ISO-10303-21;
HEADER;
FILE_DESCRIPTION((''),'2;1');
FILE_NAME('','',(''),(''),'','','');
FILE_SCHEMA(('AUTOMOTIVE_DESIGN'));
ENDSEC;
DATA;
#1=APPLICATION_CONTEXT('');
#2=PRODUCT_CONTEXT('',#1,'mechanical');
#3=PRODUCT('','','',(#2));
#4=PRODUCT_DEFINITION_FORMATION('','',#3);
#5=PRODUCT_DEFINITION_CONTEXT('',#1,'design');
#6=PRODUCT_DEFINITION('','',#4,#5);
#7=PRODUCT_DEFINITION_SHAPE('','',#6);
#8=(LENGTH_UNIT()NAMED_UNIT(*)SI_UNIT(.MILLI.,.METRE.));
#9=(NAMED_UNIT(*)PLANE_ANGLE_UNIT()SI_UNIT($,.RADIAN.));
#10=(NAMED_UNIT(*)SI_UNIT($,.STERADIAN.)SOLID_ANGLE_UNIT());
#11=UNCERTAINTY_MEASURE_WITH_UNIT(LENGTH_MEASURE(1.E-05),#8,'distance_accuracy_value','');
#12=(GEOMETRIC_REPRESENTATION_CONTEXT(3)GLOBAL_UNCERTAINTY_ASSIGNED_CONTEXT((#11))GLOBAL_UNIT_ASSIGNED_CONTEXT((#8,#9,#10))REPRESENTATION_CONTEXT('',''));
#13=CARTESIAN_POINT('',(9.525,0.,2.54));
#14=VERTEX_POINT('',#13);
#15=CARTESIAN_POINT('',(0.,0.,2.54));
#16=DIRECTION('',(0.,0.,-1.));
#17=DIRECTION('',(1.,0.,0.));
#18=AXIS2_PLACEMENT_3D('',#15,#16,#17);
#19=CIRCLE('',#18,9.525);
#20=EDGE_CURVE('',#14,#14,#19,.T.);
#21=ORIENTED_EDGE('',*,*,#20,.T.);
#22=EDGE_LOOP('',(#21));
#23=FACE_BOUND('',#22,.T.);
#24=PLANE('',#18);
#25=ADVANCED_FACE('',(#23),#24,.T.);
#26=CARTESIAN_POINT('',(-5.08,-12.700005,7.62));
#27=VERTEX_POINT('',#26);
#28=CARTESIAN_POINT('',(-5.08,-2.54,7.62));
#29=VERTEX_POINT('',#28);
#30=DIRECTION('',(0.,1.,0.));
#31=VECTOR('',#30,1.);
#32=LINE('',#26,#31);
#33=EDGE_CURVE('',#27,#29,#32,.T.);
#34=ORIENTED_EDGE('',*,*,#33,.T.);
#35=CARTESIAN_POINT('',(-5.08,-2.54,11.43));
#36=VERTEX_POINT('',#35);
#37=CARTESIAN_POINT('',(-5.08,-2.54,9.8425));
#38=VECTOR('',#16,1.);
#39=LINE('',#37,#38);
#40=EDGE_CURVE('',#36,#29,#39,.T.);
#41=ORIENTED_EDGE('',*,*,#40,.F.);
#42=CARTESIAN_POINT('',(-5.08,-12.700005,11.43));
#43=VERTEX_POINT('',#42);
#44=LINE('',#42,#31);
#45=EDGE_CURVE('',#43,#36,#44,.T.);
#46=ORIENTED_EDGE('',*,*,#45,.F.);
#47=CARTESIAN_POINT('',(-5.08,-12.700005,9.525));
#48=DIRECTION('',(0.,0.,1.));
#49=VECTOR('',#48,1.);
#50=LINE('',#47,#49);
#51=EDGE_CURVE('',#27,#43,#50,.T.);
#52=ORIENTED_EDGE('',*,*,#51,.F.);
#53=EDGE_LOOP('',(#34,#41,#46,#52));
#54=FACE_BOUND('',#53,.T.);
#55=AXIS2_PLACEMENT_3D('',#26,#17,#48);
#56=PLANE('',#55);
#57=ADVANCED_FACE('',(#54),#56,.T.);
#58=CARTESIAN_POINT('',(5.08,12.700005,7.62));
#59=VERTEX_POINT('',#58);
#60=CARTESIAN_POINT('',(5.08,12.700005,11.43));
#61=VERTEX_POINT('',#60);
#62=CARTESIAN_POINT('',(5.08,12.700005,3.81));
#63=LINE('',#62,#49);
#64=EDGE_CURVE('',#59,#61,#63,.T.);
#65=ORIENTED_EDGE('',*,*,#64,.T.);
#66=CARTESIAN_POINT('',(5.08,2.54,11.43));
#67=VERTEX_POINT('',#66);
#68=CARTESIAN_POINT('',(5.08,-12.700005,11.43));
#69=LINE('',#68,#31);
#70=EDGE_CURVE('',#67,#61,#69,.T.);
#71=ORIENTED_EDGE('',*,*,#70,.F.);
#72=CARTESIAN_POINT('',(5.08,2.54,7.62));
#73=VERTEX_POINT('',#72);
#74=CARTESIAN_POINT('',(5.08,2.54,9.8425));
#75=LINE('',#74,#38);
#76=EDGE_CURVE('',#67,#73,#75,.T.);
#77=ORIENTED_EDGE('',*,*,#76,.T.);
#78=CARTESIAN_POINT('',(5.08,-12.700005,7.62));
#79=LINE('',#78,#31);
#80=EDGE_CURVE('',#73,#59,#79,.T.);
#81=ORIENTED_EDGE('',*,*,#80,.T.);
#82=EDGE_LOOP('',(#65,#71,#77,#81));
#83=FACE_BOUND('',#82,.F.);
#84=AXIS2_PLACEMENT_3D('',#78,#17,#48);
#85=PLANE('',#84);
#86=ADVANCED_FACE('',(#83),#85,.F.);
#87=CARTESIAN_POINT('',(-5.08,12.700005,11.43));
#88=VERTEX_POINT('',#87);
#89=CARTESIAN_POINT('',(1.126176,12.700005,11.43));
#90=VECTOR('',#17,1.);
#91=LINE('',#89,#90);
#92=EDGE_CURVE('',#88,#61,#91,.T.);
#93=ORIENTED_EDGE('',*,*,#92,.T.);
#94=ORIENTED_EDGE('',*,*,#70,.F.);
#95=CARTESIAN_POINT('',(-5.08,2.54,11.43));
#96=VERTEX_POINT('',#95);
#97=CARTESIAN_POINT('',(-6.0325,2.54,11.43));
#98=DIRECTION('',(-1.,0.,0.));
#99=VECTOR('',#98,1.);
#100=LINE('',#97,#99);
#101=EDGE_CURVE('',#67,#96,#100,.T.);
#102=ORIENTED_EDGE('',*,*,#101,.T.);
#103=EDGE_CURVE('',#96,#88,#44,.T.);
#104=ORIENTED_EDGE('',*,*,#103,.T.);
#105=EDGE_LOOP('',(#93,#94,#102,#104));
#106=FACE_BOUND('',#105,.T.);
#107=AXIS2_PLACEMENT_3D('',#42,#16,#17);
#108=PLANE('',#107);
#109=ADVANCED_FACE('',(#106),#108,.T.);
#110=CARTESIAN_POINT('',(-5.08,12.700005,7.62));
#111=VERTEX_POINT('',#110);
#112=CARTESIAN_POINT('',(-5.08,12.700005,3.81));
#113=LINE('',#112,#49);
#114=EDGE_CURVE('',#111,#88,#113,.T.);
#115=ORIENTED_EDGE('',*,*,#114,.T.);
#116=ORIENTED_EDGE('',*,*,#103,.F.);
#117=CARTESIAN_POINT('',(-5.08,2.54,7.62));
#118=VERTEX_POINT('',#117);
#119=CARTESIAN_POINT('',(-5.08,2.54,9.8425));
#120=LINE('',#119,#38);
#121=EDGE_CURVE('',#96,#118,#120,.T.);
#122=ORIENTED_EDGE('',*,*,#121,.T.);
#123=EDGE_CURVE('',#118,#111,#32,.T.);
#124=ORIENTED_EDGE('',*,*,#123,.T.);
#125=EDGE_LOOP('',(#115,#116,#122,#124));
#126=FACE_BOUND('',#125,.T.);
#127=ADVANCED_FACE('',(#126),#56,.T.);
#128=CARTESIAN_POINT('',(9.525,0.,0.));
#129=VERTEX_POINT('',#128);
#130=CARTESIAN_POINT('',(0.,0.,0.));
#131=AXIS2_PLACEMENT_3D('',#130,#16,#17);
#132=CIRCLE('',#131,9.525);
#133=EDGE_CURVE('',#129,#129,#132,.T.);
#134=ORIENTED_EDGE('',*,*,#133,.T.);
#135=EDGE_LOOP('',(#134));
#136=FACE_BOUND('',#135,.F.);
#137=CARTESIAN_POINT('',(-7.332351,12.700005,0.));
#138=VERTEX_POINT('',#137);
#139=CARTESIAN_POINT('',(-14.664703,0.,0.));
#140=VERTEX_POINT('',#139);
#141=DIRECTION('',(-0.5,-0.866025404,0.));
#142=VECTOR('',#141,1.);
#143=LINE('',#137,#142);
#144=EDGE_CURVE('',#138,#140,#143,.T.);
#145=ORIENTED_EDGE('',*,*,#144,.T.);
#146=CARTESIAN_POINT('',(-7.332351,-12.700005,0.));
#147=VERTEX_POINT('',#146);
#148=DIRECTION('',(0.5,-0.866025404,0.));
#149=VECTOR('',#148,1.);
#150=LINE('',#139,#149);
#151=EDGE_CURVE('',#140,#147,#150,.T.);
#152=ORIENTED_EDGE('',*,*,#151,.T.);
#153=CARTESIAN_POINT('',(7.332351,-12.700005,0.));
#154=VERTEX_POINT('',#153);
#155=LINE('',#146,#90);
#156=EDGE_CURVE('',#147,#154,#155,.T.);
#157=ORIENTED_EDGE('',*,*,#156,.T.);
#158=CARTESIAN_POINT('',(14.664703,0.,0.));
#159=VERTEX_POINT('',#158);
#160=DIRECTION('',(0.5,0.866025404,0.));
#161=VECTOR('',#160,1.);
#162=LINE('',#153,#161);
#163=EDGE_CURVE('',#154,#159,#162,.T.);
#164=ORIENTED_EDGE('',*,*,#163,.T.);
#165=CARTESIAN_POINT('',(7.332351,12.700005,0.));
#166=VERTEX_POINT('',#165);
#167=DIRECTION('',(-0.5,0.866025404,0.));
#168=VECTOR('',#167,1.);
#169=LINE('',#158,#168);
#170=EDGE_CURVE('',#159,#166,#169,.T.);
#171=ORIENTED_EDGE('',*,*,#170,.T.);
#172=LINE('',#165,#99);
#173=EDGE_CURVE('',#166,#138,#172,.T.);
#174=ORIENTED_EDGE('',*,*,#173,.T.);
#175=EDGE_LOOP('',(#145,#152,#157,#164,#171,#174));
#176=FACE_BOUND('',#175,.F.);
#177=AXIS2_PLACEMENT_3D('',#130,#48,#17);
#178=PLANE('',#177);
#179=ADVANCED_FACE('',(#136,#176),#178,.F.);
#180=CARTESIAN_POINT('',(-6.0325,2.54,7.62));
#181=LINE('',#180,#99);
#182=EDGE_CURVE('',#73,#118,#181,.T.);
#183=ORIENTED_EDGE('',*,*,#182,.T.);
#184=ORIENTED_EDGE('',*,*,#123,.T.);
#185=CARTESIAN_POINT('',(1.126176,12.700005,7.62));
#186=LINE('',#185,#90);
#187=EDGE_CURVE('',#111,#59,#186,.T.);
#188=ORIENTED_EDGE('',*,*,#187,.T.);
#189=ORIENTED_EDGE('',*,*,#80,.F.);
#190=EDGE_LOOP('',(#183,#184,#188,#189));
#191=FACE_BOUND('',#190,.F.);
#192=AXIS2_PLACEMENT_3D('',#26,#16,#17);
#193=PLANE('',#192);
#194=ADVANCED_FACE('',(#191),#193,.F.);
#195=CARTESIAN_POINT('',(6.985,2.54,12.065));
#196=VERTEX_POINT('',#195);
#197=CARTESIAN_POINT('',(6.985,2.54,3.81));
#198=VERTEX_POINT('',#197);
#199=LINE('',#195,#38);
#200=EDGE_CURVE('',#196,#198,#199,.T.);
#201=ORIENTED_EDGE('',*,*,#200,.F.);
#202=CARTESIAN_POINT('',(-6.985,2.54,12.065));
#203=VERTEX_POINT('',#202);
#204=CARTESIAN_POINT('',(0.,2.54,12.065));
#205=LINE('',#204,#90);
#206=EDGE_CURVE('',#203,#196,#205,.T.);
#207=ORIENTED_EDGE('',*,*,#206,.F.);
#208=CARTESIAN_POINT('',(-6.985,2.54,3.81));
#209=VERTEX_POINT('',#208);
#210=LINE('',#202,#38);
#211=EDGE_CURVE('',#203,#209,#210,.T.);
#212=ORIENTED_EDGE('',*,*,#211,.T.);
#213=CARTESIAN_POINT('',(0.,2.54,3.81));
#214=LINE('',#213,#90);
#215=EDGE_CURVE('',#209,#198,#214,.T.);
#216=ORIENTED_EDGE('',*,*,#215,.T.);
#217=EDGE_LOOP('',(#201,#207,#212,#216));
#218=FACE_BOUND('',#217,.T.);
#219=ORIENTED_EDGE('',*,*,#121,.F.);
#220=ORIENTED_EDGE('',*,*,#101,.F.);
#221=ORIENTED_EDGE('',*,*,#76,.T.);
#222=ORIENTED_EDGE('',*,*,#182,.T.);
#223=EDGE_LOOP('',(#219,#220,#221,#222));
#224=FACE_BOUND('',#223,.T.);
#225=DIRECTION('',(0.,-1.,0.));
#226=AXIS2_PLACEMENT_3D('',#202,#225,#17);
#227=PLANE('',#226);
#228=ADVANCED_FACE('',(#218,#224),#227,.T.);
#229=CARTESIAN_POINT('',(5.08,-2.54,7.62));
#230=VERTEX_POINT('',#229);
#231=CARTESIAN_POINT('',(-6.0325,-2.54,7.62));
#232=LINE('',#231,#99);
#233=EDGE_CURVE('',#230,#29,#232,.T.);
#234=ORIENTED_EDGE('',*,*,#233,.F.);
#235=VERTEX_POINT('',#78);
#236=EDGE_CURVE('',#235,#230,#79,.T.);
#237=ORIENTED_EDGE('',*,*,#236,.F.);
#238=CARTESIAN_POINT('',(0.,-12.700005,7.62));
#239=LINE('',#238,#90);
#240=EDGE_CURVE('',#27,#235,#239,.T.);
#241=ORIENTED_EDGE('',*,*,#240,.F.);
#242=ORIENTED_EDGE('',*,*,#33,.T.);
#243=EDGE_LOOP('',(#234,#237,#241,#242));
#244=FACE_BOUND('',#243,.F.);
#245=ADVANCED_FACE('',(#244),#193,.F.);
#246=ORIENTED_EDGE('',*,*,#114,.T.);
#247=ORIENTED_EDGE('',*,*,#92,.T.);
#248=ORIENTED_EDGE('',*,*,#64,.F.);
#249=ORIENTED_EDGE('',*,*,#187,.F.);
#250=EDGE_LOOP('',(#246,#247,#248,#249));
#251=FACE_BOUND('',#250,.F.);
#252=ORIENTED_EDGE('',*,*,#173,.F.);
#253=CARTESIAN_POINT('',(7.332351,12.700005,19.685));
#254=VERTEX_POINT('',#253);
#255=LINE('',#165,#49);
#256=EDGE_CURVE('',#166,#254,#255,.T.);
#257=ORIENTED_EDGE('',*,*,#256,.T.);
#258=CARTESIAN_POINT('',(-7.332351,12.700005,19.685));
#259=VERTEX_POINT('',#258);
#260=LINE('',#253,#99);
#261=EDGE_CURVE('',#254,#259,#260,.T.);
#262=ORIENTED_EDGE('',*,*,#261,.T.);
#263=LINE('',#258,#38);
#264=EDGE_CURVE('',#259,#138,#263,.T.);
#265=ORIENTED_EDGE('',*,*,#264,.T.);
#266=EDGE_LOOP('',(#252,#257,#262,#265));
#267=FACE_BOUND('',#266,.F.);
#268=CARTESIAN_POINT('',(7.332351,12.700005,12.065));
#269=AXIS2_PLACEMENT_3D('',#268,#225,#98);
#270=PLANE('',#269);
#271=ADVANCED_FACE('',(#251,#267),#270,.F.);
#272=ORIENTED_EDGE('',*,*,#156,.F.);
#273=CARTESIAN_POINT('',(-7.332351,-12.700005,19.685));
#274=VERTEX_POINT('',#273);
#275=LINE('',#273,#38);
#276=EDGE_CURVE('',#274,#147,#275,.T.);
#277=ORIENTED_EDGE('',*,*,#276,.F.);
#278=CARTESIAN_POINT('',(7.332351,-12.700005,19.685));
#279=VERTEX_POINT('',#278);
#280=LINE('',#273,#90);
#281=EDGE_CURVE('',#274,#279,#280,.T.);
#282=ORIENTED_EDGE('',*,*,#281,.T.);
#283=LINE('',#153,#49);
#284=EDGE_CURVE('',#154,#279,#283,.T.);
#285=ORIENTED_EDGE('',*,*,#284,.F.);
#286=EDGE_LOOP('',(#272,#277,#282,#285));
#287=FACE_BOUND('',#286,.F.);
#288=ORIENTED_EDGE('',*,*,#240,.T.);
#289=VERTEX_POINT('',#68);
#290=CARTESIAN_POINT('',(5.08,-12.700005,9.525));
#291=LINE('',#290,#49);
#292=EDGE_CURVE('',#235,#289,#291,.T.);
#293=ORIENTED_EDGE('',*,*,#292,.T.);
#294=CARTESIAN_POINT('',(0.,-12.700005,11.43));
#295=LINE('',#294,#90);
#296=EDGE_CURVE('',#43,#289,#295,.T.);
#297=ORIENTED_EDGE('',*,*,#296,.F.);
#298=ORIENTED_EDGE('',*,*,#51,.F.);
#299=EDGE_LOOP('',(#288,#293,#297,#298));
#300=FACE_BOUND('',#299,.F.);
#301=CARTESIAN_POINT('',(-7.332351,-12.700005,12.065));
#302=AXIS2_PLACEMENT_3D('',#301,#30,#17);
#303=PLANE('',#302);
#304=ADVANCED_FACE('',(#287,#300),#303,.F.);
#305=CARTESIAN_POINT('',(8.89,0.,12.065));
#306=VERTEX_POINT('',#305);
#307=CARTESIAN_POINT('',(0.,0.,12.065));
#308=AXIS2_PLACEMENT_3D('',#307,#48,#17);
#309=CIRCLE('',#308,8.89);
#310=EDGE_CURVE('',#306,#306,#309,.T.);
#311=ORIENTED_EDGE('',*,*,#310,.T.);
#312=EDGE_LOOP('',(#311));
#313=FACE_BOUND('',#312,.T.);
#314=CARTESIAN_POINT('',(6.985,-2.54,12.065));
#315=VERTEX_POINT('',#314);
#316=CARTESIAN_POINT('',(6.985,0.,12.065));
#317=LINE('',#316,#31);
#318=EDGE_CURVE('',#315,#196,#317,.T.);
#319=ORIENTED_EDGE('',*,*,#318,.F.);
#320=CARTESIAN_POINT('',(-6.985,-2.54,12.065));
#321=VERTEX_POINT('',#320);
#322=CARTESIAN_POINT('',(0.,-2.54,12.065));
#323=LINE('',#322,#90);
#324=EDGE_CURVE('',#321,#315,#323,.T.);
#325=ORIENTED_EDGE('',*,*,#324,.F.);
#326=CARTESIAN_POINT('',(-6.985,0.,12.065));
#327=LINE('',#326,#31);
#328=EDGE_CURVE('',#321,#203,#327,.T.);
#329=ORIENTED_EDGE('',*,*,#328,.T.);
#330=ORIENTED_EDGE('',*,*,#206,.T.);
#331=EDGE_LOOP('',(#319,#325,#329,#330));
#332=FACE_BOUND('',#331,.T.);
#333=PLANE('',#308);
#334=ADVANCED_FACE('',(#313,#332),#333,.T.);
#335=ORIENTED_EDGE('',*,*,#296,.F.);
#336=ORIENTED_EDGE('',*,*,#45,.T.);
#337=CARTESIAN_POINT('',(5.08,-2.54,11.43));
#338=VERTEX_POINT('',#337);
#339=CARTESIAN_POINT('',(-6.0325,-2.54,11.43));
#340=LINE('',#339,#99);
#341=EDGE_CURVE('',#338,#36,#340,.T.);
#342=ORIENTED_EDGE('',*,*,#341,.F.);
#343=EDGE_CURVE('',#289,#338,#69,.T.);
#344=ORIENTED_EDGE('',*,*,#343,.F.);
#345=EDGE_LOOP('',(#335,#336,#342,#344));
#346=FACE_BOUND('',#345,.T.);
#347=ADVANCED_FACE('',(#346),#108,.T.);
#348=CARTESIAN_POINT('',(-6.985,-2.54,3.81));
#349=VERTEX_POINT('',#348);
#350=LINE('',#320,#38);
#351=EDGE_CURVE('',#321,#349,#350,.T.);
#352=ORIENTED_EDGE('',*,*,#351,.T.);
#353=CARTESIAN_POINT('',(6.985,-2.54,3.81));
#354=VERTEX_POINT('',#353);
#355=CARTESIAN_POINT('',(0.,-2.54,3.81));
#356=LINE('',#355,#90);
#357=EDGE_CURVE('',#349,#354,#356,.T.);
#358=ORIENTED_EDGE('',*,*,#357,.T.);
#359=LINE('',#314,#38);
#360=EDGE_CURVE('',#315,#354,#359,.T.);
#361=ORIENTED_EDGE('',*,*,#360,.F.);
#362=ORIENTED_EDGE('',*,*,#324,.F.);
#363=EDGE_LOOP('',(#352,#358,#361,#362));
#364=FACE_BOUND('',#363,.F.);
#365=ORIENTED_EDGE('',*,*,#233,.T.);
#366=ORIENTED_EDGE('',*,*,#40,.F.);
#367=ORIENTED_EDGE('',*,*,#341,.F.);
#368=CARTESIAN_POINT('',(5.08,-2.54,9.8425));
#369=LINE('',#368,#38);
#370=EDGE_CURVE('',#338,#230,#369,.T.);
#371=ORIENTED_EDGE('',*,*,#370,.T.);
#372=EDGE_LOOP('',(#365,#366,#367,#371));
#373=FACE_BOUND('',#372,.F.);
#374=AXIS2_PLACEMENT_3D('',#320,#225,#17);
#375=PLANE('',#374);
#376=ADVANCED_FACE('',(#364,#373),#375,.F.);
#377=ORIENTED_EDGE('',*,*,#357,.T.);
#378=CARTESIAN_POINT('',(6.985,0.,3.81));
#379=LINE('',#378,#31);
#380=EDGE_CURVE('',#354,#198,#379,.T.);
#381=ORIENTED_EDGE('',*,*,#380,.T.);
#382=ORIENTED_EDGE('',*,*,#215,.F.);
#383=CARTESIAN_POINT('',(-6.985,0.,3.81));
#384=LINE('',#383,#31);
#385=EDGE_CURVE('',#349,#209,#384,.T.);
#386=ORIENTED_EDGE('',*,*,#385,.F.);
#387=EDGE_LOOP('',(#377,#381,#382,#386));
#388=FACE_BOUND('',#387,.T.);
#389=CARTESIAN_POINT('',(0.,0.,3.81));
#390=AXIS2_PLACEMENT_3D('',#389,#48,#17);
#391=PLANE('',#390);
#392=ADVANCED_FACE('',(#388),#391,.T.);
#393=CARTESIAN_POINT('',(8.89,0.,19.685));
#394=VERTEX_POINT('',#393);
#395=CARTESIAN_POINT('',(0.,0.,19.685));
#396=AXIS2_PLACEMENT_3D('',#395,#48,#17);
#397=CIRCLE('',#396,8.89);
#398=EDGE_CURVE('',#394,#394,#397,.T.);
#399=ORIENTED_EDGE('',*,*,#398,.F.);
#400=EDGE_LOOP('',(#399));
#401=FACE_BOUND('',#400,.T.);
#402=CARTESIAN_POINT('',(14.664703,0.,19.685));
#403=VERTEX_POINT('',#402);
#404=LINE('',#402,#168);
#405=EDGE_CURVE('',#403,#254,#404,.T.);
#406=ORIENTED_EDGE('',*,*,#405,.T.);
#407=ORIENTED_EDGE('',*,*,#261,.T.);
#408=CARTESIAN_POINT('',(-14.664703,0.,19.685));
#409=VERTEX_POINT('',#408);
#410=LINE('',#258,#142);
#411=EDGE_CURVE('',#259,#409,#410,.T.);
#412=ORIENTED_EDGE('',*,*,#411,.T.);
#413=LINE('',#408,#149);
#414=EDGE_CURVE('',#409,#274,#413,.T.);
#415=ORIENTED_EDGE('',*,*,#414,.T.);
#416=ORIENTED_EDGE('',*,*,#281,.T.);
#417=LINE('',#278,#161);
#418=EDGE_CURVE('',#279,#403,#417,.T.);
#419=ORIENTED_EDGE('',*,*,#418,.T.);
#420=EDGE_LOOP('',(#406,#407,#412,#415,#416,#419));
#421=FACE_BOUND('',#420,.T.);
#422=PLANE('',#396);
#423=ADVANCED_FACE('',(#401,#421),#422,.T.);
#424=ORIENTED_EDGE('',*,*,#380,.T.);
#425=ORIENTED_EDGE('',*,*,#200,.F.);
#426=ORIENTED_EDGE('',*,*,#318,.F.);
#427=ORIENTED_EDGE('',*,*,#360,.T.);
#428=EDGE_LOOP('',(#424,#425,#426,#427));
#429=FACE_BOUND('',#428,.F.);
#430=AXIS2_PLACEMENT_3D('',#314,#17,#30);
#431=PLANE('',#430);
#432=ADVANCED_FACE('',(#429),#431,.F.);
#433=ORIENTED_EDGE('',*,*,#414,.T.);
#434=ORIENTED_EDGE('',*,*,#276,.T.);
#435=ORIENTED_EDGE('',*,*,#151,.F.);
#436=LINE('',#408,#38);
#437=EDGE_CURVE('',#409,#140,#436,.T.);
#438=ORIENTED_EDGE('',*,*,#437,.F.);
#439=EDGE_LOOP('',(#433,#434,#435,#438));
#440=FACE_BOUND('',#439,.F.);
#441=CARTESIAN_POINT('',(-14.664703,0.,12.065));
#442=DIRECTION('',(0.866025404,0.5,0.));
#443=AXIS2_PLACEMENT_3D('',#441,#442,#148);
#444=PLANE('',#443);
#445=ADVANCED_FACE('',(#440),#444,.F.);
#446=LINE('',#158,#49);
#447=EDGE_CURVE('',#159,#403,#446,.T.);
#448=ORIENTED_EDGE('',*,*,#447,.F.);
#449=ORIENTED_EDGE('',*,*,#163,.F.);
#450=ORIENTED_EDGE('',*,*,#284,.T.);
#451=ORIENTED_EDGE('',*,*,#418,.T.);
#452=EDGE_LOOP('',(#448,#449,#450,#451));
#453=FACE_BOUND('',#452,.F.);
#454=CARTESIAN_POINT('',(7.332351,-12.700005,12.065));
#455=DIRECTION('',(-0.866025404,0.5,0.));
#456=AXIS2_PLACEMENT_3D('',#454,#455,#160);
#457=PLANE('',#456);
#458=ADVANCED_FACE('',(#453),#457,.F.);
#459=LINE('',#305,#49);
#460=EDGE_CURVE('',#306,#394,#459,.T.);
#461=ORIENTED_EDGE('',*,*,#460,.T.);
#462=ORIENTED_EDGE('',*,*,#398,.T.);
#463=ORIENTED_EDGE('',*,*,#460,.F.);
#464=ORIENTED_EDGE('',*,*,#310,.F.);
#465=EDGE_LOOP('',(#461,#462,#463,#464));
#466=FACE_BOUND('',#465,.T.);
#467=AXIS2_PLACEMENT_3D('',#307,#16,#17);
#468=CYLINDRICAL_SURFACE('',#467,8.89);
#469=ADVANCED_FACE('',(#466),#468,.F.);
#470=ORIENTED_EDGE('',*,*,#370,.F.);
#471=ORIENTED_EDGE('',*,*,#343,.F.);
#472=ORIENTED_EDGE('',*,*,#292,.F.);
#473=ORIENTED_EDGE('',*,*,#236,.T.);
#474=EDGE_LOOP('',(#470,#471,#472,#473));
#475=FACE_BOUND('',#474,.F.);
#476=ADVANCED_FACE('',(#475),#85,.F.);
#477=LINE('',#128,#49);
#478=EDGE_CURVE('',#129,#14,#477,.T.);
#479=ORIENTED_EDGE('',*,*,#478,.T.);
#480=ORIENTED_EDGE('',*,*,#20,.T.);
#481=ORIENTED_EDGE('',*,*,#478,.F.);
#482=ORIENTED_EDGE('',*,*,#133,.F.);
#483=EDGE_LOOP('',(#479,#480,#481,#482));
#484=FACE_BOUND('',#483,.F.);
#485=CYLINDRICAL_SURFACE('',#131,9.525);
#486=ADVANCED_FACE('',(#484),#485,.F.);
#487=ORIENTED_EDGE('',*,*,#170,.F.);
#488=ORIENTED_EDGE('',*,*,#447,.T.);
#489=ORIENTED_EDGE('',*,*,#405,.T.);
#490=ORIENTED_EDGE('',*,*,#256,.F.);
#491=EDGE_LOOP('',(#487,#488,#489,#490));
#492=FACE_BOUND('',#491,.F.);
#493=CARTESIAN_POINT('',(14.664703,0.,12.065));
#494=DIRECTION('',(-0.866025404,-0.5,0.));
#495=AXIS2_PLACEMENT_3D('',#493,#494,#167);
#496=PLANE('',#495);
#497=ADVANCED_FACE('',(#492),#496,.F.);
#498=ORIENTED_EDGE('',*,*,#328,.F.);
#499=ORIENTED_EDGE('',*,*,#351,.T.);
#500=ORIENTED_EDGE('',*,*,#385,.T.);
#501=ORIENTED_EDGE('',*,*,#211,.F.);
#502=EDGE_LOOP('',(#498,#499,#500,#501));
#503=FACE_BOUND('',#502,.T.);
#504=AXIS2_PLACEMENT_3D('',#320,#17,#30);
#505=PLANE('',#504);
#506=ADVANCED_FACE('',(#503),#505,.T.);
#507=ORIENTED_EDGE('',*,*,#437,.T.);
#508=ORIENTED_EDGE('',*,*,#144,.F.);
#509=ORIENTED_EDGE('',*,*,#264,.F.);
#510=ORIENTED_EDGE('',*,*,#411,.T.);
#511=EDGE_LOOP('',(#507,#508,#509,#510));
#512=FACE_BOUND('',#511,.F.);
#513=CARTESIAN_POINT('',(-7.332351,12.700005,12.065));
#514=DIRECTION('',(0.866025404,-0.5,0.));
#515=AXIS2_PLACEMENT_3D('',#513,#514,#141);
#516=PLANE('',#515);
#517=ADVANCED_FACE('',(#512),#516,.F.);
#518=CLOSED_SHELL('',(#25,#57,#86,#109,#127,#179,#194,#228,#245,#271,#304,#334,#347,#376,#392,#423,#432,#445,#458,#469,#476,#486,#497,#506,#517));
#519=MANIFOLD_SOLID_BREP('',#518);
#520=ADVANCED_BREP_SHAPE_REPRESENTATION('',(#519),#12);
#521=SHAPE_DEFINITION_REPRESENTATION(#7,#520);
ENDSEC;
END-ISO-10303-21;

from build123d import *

# Parameters (mm, degrees)
F1_DEPTH = 12.065
F2_W     = 10.16
F2_H     = 3.81
F3_DEPTH = 25.4010101543
F5_W     = 13.97
F5_H     = 5.08
F6_DEPTH = 8.255
F4_R     = 8.89
F7_DEPTH = 7.62
F8_R     = 9.525
F9_DEPTH = 2.54


# Not quite as in the source:
# - a feature names something its author has since deleted; it is built from what else it names


with BuildPart() as f1:
    # F0 (on Top) → F1 (new body)
    with BuildSketch(Plane.XY):
        Polygon((7.33235135, -12.7000050771), (14.6647027, 0), (7.33235135, 12.7000050771), (-7.33235135, 12.7000050771), (-14.6647027, 0), (-7.33235135, -12.7000050771), align=None)
    extrude(amount=F1_DEPTH)

    # F2 (on face) → F3 (cut, through all)
    with BuildSketch(Plane.XZ.offset(12.7000050771)):
        with Locations((0, 9.525)):
            Rectangle(F2_W, F2_H)
    extrude(amount=-F3_DEPTH, mode=Mode.SUBTRACT)

    # F5 (on face) → F6 (cut)
    with BuildSketch(Plane.XY.offset(12.065)):
        Rectangle(F5_W, F5_H)
    extrude(amount=-F6_DEPTH, mode=Mode.SUBTRACT)

    # F4 (on face) → F7 (join)
    with BuildSketch(Plane.XY.offset(12.065)):
        Polygon((-7.33235135, -12.7000050771), (7.33235135, -12.7000050771), (14.6647027, 0), (7.33235135, 12.7000050771), (-7.33235135, 12.7000050771), (-14.6647027, 0), align=None)
        Circle(F4_R, mode=Mode.SUBTRACT)
    extrude(amount=F7_DEPTH)

    # F8 (on face) → F9 (cut)
    with BuildSketch(Plane(origin=(0, 0, 0), x_dir=(1, 0, 0), z_dir=(0, 0, -1))):
        Circle(F8_R)
    extrude(amount=-F9_DEPTH, mode=Mode.SUBTRACT)


solid = f1.part
